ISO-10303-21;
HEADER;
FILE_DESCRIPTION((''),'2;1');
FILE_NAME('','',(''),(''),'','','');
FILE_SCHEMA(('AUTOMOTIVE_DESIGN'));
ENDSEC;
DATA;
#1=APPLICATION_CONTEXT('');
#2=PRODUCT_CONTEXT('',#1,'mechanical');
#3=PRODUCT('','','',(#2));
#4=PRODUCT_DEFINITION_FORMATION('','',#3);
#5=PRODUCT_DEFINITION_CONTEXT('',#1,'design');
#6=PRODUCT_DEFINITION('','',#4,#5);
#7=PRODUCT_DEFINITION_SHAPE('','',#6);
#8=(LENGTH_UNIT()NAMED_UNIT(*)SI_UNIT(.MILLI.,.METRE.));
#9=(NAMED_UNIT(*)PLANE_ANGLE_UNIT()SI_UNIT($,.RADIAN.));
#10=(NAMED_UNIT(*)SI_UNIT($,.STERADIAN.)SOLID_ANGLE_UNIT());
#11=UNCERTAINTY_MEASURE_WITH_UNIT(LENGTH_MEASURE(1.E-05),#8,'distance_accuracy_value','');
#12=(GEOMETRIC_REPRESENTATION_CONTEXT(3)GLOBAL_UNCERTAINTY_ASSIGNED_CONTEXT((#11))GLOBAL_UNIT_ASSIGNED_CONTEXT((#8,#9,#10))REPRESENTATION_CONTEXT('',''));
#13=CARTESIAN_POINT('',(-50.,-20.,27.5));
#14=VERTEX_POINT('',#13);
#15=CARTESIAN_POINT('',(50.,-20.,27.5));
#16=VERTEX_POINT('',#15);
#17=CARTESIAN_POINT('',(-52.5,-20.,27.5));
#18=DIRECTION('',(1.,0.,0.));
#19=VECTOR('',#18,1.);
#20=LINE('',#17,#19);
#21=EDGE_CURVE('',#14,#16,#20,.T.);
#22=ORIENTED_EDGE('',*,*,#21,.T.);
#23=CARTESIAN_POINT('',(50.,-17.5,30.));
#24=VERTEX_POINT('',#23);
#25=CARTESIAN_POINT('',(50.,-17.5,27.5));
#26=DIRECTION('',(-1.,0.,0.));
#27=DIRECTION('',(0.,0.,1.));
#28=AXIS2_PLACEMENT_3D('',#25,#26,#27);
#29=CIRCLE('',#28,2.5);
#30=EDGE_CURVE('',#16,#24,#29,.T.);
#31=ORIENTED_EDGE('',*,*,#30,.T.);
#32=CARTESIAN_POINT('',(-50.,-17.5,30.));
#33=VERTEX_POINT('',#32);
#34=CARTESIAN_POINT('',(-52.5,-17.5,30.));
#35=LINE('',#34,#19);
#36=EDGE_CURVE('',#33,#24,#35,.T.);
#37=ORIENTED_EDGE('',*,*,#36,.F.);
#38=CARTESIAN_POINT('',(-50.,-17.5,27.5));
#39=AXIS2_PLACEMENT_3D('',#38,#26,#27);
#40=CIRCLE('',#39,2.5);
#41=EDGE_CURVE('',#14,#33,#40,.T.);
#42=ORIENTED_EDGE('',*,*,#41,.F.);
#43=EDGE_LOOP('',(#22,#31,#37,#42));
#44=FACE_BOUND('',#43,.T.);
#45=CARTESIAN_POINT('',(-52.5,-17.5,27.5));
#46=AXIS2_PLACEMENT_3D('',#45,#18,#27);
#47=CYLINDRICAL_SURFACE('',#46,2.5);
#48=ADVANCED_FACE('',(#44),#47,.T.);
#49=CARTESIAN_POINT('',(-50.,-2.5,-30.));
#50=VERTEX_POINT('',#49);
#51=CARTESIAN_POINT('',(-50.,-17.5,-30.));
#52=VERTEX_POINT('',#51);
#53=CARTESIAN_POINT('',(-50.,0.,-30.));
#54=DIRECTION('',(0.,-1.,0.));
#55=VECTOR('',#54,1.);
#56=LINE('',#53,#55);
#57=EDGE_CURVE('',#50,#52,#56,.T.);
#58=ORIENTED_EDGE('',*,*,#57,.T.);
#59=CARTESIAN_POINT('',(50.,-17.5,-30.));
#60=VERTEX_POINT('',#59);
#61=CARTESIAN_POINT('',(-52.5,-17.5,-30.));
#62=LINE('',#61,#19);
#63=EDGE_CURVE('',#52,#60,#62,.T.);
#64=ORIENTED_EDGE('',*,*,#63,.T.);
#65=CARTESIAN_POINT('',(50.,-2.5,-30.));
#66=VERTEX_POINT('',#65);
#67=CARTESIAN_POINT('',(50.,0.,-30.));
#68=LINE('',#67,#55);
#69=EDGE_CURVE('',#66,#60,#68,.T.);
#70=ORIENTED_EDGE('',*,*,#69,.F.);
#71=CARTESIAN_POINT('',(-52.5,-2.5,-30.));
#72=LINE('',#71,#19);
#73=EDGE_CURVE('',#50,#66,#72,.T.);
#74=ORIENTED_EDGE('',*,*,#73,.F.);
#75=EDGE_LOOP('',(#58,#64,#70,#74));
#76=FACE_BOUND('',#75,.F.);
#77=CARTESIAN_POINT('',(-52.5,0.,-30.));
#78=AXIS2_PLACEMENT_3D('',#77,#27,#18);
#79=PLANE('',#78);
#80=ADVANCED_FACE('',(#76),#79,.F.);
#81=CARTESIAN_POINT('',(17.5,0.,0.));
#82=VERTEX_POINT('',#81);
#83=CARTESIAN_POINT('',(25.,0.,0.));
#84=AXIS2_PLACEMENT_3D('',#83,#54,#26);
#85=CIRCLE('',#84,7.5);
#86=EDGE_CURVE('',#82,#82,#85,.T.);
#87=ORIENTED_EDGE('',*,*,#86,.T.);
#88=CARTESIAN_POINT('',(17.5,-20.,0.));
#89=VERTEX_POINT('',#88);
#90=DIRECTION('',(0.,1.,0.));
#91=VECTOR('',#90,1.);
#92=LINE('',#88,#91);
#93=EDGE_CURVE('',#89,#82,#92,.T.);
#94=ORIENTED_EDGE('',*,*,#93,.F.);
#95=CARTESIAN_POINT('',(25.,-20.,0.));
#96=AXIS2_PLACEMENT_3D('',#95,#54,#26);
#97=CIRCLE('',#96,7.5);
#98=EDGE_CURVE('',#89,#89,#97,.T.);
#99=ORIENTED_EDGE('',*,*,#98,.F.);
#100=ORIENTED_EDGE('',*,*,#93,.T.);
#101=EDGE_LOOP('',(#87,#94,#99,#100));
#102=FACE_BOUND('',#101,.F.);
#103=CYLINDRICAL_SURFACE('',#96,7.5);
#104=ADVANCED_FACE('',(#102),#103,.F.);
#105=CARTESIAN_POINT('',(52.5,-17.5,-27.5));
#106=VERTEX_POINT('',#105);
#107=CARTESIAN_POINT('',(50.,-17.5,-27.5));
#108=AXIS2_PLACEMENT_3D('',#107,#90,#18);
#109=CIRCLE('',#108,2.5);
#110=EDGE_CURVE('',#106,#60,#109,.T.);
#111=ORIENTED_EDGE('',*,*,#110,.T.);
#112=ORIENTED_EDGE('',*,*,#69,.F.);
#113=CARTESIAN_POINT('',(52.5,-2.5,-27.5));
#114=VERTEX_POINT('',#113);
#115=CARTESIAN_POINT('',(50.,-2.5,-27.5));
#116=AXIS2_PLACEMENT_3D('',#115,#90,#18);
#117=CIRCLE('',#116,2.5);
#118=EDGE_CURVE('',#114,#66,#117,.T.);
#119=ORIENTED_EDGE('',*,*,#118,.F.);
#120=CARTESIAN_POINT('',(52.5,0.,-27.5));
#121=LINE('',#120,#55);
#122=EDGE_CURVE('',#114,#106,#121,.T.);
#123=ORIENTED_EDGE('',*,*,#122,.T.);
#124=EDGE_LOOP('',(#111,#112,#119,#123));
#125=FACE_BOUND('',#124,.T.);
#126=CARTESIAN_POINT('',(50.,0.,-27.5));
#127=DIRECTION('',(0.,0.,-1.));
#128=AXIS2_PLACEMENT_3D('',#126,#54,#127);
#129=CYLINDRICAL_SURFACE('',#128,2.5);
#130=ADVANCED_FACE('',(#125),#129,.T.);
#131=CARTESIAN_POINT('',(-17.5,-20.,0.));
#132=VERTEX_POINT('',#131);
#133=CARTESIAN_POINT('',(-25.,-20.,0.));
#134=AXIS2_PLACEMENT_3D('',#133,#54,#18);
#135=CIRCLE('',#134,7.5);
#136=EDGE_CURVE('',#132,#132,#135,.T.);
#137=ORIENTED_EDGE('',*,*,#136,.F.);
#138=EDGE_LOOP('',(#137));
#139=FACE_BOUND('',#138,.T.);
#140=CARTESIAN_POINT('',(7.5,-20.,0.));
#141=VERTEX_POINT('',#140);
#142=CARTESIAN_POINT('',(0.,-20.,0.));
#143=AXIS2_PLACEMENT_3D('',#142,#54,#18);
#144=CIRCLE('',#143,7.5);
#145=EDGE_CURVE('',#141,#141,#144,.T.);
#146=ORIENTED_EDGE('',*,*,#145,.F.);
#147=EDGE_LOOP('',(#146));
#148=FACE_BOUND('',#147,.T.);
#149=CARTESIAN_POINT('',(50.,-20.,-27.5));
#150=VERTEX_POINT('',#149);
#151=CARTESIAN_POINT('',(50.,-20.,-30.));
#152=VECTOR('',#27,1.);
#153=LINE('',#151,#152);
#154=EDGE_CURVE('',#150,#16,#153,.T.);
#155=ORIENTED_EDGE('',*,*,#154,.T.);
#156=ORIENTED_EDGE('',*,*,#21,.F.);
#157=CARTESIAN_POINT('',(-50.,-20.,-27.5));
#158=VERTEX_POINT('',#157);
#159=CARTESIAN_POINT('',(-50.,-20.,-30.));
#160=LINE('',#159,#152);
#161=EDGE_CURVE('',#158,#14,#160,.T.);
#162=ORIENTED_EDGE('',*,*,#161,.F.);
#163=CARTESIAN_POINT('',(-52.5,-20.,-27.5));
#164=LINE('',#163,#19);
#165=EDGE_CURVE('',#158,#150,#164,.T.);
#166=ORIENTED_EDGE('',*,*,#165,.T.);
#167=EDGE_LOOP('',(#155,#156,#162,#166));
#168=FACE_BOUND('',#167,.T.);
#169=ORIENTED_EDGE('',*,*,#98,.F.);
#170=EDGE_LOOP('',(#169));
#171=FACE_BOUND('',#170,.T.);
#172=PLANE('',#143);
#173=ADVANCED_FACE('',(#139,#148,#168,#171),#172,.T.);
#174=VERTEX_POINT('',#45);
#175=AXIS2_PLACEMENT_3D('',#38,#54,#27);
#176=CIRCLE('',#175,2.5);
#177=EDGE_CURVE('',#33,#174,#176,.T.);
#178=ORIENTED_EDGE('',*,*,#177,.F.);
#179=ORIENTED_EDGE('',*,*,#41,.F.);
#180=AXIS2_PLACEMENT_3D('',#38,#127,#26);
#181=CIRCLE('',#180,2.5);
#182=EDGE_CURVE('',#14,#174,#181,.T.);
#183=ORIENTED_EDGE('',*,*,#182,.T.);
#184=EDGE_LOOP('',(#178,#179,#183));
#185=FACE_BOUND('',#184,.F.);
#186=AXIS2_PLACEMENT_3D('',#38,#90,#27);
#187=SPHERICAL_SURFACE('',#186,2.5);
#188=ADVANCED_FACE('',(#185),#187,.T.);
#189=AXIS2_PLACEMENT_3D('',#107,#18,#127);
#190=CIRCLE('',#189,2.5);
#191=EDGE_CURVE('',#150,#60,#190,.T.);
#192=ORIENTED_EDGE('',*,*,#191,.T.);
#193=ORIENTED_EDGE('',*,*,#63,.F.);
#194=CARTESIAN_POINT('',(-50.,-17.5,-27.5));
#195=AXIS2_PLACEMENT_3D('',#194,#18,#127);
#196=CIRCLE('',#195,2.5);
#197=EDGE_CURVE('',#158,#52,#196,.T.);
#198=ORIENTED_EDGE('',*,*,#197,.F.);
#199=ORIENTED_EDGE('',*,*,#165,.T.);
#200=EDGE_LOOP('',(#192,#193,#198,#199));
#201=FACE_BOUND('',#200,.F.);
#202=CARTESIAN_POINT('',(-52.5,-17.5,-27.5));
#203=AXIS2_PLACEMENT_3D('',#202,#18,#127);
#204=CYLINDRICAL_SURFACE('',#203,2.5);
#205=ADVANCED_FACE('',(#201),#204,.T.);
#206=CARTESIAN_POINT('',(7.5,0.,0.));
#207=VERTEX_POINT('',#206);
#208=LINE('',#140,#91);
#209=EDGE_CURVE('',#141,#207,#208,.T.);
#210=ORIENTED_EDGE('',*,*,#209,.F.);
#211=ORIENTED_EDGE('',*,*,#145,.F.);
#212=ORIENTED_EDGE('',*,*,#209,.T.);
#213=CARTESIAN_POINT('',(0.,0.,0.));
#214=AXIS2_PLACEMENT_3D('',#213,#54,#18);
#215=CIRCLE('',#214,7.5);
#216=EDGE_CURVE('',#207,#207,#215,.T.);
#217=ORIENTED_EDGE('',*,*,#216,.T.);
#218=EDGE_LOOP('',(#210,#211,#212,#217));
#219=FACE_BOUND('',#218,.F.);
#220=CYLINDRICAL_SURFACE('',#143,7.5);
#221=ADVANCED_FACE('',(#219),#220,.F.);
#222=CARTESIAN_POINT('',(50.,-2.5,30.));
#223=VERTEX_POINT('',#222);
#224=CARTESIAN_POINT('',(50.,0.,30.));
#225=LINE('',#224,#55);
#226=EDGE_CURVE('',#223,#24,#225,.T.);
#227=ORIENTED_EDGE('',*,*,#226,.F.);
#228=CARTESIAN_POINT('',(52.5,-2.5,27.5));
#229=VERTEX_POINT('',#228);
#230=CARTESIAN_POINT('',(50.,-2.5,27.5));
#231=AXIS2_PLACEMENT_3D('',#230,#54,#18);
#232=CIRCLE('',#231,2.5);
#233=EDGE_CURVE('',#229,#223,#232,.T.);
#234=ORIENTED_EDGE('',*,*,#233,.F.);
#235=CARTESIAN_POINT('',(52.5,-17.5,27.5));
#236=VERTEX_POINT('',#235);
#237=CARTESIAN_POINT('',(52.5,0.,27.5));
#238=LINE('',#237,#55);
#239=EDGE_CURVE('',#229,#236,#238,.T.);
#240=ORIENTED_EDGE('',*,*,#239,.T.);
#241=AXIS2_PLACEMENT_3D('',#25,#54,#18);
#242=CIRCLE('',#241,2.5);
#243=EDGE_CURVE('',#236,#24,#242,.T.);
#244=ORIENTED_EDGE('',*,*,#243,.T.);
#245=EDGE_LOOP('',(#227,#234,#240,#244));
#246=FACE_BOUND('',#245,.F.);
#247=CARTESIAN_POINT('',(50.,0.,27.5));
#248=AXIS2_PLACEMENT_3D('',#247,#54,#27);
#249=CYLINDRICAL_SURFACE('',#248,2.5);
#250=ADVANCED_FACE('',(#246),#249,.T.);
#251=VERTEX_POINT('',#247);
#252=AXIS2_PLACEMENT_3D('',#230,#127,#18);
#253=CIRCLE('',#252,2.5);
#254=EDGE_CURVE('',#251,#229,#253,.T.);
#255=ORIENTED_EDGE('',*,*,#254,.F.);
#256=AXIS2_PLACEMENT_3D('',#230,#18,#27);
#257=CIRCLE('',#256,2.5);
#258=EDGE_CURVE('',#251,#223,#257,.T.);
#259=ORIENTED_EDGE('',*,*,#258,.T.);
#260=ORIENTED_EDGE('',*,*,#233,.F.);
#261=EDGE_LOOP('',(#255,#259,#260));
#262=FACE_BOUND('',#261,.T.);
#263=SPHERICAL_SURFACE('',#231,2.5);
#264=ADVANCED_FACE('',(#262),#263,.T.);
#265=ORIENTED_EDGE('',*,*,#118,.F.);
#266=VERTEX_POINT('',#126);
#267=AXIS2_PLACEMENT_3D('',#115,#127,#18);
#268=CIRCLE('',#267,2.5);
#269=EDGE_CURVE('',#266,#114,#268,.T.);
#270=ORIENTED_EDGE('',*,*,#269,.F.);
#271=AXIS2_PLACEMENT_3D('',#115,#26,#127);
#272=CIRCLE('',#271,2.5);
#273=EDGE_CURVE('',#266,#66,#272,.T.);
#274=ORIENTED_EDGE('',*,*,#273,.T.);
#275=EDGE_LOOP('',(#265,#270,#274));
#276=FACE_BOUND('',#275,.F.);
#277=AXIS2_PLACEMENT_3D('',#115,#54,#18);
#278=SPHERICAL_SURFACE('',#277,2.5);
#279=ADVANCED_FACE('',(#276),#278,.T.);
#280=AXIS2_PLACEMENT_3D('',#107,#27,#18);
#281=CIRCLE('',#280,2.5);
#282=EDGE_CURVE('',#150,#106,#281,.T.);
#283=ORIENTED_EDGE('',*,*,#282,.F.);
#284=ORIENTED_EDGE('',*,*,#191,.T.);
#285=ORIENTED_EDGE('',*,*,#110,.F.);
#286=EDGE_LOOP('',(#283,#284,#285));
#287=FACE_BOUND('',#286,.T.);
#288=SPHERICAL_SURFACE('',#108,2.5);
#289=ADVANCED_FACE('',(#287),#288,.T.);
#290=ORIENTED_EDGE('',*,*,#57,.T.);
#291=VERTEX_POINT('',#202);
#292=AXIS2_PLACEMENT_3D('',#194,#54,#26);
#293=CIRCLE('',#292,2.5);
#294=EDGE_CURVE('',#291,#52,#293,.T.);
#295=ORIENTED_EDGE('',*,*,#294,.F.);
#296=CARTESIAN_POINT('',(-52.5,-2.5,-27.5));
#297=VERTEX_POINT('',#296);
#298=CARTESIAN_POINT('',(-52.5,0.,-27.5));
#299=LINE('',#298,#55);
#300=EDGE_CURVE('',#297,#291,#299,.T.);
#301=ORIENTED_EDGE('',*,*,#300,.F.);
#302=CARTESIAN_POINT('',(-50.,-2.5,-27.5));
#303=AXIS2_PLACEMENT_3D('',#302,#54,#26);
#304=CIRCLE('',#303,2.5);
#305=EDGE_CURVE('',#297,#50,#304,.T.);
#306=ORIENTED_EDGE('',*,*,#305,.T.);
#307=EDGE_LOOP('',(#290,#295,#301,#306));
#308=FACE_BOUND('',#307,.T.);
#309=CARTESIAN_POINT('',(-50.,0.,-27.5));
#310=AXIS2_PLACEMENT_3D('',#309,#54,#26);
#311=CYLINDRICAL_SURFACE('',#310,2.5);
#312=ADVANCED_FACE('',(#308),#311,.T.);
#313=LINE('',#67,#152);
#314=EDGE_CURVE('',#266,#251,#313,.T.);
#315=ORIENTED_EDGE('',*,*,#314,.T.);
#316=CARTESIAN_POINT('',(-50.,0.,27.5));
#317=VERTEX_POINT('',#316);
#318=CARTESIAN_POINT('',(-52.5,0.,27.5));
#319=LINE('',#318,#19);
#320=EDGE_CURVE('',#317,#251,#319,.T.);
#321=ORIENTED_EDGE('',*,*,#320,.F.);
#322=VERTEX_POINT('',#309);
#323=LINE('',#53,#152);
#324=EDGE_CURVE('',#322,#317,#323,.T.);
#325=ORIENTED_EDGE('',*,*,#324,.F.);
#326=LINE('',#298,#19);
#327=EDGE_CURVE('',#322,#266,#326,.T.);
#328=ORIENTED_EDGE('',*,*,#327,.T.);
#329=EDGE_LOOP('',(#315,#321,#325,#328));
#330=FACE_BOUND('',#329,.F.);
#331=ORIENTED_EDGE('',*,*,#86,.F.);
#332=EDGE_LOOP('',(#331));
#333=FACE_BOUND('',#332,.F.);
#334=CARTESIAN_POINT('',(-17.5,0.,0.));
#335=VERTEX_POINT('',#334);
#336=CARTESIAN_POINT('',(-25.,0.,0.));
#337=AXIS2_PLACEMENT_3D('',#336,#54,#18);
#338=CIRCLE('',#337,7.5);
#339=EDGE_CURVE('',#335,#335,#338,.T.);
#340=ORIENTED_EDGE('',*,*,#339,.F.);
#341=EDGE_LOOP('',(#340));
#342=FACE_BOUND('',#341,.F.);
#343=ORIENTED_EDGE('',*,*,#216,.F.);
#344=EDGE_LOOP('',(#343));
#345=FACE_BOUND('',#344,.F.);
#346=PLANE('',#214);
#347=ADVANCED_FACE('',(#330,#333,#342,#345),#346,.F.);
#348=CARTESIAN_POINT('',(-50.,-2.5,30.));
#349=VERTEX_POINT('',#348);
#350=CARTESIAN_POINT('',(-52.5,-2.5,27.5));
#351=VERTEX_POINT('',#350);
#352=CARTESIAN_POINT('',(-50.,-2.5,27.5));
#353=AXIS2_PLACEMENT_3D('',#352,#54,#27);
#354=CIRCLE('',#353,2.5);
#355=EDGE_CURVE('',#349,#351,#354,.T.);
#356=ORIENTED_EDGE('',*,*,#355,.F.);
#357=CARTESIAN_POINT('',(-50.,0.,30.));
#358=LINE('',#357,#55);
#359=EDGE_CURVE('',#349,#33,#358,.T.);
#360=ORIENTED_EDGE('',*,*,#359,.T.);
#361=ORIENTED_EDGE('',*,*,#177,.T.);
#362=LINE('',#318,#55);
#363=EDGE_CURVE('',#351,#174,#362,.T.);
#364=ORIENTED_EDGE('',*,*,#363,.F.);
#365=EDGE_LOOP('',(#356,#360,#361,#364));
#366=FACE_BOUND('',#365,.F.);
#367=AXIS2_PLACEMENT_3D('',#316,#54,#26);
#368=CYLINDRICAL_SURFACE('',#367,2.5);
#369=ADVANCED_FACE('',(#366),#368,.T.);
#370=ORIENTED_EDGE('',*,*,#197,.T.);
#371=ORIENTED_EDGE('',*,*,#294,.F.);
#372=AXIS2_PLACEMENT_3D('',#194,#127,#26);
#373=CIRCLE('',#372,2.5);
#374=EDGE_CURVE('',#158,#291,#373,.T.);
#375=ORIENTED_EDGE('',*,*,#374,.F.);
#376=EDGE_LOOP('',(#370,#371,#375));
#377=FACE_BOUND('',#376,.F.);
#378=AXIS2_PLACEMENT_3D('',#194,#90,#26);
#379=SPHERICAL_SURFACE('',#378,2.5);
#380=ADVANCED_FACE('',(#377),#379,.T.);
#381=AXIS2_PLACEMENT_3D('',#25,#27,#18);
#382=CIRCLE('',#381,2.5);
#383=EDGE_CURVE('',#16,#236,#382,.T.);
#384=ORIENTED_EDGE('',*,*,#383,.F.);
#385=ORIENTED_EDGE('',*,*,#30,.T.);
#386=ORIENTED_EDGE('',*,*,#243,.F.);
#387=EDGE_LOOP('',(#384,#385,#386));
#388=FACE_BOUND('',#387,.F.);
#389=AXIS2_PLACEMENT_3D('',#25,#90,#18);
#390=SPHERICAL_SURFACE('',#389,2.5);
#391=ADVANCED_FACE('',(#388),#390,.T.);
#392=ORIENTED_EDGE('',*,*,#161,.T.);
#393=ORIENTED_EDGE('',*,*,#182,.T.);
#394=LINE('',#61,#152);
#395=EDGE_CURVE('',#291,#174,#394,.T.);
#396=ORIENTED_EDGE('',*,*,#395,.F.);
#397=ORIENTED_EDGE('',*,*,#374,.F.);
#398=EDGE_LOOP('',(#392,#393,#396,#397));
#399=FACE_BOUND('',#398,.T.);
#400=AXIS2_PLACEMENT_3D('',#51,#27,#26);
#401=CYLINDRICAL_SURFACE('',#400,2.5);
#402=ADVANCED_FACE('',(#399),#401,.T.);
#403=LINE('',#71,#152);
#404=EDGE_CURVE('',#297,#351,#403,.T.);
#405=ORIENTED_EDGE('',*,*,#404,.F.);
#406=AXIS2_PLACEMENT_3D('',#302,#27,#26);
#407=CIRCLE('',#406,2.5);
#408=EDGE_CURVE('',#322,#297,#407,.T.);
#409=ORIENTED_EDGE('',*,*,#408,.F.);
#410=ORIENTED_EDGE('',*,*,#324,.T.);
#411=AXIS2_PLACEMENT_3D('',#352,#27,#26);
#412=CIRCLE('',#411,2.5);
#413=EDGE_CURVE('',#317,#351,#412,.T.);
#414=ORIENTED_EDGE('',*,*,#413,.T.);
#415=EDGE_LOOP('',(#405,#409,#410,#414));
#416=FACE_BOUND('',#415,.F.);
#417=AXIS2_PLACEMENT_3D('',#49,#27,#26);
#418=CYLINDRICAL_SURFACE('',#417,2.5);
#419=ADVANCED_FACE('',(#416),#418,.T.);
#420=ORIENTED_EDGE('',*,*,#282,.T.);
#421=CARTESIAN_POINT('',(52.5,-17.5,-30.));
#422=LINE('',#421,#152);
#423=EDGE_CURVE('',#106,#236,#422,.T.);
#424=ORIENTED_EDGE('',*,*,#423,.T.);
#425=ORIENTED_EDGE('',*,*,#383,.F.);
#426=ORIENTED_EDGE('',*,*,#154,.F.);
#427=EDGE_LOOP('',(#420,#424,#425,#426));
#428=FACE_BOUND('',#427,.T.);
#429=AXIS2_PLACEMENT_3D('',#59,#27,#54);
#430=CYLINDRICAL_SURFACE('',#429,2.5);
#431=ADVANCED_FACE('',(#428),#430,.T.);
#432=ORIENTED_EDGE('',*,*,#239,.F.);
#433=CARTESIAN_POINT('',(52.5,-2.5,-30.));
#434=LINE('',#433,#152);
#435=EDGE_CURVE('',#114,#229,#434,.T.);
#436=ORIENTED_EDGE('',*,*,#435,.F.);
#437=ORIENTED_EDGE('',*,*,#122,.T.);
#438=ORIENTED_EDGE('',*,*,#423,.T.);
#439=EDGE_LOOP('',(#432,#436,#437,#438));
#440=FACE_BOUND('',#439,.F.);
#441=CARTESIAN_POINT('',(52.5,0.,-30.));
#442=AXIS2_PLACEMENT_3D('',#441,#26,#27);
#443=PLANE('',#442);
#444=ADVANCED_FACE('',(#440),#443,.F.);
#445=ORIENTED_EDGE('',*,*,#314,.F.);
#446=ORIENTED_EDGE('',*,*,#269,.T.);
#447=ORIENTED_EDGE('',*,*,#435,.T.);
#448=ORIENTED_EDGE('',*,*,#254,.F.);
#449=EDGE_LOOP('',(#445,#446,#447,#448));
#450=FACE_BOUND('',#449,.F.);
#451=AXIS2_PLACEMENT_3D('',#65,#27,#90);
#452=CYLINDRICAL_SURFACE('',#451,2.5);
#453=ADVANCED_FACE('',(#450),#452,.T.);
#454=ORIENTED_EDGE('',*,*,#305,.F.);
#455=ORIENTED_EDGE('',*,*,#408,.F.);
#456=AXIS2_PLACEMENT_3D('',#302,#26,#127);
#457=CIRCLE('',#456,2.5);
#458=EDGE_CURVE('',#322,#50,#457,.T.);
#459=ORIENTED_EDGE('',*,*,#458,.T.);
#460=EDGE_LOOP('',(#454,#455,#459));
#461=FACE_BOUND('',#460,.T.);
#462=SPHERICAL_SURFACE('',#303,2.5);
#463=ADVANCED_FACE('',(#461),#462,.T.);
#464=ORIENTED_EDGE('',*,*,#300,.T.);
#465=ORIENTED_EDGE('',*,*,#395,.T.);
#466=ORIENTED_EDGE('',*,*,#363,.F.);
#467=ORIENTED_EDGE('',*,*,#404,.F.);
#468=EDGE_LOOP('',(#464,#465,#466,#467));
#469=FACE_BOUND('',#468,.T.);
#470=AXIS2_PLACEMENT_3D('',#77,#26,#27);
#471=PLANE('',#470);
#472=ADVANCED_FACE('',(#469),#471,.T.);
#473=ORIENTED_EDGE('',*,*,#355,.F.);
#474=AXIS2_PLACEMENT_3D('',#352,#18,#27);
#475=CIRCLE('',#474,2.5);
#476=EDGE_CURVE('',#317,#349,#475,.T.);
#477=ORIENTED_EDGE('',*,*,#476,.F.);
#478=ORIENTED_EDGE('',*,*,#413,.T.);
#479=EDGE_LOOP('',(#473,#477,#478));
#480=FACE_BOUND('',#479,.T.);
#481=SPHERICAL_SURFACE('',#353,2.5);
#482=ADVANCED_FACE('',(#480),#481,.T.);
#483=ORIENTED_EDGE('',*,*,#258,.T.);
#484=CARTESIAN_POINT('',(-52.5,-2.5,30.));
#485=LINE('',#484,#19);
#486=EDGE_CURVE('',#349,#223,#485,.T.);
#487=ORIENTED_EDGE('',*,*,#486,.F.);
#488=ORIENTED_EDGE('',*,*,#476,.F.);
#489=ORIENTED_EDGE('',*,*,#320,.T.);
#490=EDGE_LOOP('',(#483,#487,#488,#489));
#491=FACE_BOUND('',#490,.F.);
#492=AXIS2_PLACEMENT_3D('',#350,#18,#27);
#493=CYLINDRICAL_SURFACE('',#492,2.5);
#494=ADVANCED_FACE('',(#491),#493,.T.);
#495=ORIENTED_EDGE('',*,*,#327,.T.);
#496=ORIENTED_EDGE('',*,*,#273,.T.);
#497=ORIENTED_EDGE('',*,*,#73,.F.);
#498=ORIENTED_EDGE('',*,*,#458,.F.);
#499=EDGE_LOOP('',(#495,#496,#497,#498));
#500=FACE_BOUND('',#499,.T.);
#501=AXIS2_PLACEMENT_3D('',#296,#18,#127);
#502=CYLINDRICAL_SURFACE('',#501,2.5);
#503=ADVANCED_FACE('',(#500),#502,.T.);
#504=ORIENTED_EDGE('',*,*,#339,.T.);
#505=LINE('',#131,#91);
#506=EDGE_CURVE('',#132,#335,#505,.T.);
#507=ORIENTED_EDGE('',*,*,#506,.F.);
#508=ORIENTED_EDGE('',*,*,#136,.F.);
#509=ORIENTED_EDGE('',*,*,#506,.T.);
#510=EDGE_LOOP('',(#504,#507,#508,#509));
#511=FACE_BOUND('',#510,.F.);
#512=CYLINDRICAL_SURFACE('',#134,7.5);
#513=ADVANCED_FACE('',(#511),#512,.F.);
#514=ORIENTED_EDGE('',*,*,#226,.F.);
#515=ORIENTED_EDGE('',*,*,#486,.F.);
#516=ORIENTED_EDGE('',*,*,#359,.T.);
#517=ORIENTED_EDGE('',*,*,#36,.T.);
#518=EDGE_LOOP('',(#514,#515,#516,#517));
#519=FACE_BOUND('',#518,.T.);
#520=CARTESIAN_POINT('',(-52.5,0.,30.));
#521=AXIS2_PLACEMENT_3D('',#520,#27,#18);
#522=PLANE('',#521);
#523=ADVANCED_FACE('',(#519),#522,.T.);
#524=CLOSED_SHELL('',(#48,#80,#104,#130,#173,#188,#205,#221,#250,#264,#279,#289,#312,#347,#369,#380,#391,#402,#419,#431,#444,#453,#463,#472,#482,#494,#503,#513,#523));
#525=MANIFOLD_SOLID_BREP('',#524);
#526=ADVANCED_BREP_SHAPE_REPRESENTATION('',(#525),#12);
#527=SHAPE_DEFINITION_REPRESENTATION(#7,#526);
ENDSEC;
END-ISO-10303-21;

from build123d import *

# Parameters (mm, degrees)
F0_W     = 105
F0_H     = 60
F1_DEPTH = 20
F2_R     = 7.5
F3_DEPTH = 25
F4_R     = 2.5


with BuildPart() as f1:
    # F0 (on Front) → F1 (new body)
    with BuildSketch(Plane.XZ):
        Rectangle(F0_W, F0_H)
    extrude(amount=F1_DEPTH)

    # F2 (on face) → F3 (cut)
    with BuildSketch(Plane.XZ.offset(20)):
        with BuildLine():
            ThreePointArc((-7.5, 0), (0, -7.5), (7.5, 0))
            ThreePointArc((7.5, 0), (0, 7.5), (-7.5, 0))
        make_face()
        with Locations((-25, 0)):
            Circle(F2_R)
        with BuildLine():
            ThreePointArc((32.5, 0), (25, 7.5), (17.5, 0))
            ThreePointArc((17.5, 0), (25, -7.5), (32.5, 0))
        make_face()
    extrude(amount=-F3_DEPTH, mode=Mode.SUBTRACT)

    # F4
    f4_edges = [f1.edges().sort_by_distance(p)[0] for p in [
        (52.5, -10, -30),
        (52.5, -10, 30),
        (52.5, 0, 0),
        (52.5, -20, 0),
        (-52.5, -10, 30),
        (0, 0, 30),
        (0, -20, 30),
        (-52.5, -10, -30),
        (-52.5, 0, 0),
        (-52.5, -20, 0),
        (0, 0, -30),
        (0, -20, -30),
    ]]
    fillet(f4_edges, radius=F4_R)


solid = f1.part
